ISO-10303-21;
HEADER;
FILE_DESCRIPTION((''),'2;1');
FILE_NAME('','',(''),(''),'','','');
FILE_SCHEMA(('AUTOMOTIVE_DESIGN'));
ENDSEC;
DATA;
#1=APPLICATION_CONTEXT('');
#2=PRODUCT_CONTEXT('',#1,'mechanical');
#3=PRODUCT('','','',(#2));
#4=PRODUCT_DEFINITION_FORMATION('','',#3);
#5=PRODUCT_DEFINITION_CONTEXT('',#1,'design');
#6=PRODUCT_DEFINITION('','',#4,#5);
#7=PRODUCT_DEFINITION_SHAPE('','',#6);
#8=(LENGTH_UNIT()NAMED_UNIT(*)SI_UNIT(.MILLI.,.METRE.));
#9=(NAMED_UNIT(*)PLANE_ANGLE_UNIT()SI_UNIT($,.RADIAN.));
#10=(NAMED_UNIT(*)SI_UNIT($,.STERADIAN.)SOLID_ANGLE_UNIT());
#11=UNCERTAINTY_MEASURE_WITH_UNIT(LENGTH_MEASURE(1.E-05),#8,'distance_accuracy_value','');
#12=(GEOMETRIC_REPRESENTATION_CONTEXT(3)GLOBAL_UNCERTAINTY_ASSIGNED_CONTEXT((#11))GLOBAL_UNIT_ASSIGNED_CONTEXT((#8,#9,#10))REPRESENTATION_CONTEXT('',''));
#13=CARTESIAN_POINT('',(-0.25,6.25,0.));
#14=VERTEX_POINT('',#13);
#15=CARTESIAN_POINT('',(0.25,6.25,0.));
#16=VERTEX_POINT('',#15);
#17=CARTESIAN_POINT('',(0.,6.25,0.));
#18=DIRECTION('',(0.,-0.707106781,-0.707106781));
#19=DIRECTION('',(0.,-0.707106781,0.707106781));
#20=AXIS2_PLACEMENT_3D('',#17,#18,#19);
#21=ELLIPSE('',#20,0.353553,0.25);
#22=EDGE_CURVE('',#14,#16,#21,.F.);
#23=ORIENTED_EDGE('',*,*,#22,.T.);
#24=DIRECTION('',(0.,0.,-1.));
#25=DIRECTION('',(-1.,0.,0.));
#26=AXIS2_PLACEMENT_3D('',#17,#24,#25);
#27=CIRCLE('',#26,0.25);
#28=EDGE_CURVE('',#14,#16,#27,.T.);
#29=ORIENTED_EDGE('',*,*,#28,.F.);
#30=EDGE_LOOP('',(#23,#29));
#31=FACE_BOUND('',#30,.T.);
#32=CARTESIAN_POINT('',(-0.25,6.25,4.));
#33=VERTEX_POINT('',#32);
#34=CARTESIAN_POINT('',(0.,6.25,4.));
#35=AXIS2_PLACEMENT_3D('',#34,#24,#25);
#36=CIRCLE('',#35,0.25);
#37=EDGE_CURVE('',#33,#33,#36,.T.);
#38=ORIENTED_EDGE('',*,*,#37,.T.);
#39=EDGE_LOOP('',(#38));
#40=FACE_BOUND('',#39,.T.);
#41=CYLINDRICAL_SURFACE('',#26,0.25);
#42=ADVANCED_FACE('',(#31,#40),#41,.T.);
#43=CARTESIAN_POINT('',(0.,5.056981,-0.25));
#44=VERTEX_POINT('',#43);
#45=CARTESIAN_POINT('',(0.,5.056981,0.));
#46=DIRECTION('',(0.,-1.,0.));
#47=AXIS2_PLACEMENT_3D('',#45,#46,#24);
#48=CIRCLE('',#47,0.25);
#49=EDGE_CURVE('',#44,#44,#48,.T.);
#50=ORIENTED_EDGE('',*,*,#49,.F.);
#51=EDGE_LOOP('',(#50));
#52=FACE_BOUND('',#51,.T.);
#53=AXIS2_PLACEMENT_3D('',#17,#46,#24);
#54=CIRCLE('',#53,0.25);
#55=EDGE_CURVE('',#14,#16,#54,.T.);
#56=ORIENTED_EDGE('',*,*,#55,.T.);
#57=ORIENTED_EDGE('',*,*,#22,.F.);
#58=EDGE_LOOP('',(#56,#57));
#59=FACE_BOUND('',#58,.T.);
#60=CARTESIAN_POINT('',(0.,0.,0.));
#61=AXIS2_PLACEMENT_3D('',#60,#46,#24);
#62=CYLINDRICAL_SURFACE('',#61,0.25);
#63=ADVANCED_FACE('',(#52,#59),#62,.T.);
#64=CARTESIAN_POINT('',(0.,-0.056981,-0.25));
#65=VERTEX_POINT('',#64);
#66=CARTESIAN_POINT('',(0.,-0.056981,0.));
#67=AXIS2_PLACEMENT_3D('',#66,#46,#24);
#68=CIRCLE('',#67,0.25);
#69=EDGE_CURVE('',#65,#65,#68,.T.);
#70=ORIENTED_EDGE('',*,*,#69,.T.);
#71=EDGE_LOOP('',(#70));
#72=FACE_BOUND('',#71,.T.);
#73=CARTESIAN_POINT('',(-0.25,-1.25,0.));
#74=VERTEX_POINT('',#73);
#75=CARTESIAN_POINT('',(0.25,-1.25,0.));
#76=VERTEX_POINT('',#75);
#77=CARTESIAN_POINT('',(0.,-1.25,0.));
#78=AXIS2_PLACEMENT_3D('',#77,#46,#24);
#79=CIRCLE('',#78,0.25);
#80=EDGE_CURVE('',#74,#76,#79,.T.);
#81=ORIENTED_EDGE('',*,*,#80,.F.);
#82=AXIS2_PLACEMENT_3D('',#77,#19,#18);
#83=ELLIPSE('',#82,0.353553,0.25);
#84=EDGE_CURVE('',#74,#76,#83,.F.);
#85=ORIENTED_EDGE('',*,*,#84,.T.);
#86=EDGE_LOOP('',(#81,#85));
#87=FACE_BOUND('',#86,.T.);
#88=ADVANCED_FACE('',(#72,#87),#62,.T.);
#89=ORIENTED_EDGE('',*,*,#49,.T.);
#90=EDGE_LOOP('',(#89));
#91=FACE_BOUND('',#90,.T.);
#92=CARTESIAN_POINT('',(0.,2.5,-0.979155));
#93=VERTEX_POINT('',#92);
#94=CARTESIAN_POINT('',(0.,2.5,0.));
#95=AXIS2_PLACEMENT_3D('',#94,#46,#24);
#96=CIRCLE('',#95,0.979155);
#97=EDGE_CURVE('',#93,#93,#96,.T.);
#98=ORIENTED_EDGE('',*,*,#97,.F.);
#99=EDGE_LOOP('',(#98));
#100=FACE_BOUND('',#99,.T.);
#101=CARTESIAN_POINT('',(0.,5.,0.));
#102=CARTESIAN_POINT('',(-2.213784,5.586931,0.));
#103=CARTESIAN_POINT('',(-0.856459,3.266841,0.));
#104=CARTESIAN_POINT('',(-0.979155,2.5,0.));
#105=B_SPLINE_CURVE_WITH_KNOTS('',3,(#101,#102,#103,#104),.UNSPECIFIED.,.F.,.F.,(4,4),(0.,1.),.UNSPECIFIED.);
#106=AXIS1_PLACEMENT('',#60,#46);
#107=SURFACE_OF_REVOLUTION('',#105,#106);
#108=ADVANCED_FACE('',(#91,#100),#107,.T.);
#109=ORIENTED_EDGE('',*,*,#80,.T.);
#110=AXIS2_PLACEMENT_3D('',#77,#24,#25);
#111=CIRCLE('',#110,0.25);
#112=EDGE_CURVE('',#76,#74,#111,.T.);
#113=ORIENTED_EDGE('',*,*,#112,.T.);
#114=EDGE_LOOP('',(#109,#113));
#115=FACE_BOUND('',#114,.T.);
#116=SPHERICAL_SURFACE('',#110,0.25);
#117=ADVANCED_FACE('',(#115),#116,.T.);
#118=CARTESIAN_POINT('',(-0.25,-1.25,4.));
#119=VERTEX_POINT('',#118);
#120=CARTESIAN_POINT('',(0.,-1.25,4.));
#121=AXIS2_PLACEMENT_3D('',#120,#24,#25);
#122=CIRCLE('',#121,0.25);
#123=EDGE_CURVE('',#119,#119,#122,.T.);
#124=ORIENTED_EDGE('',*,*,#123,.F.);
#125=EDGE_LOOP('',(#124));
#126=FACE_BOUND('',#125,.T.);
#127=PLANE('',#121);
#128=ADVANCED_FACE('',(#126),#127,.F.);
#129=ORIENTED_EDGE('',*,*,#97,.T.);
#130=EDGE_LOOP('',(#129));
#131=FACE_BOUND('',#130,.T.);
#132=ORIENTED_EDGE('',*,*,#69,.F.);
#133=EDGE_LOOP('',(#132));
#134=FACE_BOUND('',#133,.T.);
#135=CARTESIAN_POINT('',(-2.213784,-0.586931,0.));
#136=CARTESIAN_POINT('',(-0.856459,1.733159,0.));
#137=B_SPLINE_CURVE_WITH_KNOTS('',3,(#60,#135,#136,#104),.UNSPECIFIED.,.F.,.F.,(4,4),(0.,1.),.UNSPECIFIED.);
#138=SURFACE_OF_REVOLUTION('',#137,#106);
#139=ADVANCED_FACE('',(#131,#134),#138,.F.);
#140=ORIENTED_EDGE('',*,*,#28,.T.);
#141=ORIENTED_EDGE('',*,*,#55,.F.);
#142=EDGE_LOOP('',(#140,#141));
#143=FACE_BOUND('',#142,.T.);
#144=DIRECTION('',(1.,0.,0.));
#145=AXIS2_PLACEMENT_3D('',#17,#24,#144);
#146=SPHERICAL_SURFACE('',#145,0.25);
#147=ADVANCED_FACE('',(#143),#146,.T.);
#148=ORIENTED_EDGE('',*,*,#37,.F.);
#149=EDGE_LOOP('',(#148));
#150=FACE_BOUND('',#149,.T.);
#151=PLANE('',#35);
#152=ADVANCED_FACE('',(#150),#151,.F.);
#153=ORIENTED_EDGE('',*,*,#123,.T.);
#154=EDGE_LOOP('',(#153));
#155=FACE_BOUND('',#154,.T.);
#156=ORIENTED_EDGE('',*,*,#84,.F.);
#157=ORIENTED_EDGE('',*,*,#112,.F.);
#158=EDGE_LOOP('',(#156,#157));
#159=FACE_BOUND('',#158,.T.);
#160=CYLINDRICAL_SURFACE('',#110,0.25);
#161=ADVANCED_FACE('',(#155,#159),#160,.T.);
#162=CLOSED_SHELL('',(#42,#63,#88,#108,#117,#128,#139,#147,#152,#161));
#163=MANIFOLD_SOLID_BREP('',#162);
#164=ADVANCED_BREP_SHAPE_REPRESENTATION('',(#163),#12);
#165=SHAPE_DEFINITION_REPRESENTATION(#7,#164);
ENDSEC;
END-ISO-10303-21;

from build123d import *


with BuildPart() as part:
    # Esquisse2 → Révolution1 (revolve)
    with BuildSketch(Plane.XY):
        with BuildLine():
            add(Edge.make_bspline(
                [(-0.25, 5.05698061), (-2.107045179, 5.402904177), (-0.86139121, 3.236013516), (-0.979154643, 2.5)],
                knots=[0.040200469, 0.040200469, 0.040200469, 0.040200469, 1, 1, 1, 1], degree=3))
            add(Edge.make_bspline(
                [(-0.25, -0.05698061), (-2.107045179, -0.402904177), (-0.86139121, 1.763986484), (-0.979154643, 2.5)],
                knots=[0.040200469, 0.040200469, 0.040200469, 0.040200469, 1, 1, 1, 1], degree=3))
            Line((-0.25, -0.05698061), (-0.25, -1.25))
            Line((-0.25, -1.25), (0, -1.25))
            Line((0, -1.25), (0, 6.25))
            Line((0, 6.25), (-0.25, 6.25))
            Line((-0.25, 6.25), (-0.25, 5.05698061))
        make_face()
    revolve(axis=Axis((0, 0, 0), (0, 1, 0)))

    # Esquisse4 → Révolution2 (revolve)
    with BuildSketch(Plane(origin=(0, -1.25, 0), x_dir=(-1, 0, 0), z_dir=(0, -1, 0))):
        with BuildLine():
            ThreePointArc((0, 0.25), (-0.176776695, 0.176776695), (-0.25, 0))
            Line((-0.25, 0), (-0.25, -4))
            Line((-0.25, -4), (0, -4))
            Line((0, -4), (0, 0.25))
        make_face()
    revolve(axis=Axis((0, -1.25, 0), (0, 0, 1)))

    # Esquisse5 → Révolution3 (revolve)
    with BuildSketch(Plane(origin=(0, 6.25, 0), x_dir=(1, 0, 0), z_dir=(0, 1, 0))):
        with BuildLine():
            ThreePointArc((0, 0.25), (-0.176776695, 0.176776695), (-0.25, 0))
            Line((-0.25, 0), (-0.25, -4))
            Line((-0.25, -4), (0, -4))
            Line((0, -4), (0, 0.25))
        make_face()
    revolve(axis=Axis((0, 6.25, 0), (0, 0, 1)))


solid = part.part
